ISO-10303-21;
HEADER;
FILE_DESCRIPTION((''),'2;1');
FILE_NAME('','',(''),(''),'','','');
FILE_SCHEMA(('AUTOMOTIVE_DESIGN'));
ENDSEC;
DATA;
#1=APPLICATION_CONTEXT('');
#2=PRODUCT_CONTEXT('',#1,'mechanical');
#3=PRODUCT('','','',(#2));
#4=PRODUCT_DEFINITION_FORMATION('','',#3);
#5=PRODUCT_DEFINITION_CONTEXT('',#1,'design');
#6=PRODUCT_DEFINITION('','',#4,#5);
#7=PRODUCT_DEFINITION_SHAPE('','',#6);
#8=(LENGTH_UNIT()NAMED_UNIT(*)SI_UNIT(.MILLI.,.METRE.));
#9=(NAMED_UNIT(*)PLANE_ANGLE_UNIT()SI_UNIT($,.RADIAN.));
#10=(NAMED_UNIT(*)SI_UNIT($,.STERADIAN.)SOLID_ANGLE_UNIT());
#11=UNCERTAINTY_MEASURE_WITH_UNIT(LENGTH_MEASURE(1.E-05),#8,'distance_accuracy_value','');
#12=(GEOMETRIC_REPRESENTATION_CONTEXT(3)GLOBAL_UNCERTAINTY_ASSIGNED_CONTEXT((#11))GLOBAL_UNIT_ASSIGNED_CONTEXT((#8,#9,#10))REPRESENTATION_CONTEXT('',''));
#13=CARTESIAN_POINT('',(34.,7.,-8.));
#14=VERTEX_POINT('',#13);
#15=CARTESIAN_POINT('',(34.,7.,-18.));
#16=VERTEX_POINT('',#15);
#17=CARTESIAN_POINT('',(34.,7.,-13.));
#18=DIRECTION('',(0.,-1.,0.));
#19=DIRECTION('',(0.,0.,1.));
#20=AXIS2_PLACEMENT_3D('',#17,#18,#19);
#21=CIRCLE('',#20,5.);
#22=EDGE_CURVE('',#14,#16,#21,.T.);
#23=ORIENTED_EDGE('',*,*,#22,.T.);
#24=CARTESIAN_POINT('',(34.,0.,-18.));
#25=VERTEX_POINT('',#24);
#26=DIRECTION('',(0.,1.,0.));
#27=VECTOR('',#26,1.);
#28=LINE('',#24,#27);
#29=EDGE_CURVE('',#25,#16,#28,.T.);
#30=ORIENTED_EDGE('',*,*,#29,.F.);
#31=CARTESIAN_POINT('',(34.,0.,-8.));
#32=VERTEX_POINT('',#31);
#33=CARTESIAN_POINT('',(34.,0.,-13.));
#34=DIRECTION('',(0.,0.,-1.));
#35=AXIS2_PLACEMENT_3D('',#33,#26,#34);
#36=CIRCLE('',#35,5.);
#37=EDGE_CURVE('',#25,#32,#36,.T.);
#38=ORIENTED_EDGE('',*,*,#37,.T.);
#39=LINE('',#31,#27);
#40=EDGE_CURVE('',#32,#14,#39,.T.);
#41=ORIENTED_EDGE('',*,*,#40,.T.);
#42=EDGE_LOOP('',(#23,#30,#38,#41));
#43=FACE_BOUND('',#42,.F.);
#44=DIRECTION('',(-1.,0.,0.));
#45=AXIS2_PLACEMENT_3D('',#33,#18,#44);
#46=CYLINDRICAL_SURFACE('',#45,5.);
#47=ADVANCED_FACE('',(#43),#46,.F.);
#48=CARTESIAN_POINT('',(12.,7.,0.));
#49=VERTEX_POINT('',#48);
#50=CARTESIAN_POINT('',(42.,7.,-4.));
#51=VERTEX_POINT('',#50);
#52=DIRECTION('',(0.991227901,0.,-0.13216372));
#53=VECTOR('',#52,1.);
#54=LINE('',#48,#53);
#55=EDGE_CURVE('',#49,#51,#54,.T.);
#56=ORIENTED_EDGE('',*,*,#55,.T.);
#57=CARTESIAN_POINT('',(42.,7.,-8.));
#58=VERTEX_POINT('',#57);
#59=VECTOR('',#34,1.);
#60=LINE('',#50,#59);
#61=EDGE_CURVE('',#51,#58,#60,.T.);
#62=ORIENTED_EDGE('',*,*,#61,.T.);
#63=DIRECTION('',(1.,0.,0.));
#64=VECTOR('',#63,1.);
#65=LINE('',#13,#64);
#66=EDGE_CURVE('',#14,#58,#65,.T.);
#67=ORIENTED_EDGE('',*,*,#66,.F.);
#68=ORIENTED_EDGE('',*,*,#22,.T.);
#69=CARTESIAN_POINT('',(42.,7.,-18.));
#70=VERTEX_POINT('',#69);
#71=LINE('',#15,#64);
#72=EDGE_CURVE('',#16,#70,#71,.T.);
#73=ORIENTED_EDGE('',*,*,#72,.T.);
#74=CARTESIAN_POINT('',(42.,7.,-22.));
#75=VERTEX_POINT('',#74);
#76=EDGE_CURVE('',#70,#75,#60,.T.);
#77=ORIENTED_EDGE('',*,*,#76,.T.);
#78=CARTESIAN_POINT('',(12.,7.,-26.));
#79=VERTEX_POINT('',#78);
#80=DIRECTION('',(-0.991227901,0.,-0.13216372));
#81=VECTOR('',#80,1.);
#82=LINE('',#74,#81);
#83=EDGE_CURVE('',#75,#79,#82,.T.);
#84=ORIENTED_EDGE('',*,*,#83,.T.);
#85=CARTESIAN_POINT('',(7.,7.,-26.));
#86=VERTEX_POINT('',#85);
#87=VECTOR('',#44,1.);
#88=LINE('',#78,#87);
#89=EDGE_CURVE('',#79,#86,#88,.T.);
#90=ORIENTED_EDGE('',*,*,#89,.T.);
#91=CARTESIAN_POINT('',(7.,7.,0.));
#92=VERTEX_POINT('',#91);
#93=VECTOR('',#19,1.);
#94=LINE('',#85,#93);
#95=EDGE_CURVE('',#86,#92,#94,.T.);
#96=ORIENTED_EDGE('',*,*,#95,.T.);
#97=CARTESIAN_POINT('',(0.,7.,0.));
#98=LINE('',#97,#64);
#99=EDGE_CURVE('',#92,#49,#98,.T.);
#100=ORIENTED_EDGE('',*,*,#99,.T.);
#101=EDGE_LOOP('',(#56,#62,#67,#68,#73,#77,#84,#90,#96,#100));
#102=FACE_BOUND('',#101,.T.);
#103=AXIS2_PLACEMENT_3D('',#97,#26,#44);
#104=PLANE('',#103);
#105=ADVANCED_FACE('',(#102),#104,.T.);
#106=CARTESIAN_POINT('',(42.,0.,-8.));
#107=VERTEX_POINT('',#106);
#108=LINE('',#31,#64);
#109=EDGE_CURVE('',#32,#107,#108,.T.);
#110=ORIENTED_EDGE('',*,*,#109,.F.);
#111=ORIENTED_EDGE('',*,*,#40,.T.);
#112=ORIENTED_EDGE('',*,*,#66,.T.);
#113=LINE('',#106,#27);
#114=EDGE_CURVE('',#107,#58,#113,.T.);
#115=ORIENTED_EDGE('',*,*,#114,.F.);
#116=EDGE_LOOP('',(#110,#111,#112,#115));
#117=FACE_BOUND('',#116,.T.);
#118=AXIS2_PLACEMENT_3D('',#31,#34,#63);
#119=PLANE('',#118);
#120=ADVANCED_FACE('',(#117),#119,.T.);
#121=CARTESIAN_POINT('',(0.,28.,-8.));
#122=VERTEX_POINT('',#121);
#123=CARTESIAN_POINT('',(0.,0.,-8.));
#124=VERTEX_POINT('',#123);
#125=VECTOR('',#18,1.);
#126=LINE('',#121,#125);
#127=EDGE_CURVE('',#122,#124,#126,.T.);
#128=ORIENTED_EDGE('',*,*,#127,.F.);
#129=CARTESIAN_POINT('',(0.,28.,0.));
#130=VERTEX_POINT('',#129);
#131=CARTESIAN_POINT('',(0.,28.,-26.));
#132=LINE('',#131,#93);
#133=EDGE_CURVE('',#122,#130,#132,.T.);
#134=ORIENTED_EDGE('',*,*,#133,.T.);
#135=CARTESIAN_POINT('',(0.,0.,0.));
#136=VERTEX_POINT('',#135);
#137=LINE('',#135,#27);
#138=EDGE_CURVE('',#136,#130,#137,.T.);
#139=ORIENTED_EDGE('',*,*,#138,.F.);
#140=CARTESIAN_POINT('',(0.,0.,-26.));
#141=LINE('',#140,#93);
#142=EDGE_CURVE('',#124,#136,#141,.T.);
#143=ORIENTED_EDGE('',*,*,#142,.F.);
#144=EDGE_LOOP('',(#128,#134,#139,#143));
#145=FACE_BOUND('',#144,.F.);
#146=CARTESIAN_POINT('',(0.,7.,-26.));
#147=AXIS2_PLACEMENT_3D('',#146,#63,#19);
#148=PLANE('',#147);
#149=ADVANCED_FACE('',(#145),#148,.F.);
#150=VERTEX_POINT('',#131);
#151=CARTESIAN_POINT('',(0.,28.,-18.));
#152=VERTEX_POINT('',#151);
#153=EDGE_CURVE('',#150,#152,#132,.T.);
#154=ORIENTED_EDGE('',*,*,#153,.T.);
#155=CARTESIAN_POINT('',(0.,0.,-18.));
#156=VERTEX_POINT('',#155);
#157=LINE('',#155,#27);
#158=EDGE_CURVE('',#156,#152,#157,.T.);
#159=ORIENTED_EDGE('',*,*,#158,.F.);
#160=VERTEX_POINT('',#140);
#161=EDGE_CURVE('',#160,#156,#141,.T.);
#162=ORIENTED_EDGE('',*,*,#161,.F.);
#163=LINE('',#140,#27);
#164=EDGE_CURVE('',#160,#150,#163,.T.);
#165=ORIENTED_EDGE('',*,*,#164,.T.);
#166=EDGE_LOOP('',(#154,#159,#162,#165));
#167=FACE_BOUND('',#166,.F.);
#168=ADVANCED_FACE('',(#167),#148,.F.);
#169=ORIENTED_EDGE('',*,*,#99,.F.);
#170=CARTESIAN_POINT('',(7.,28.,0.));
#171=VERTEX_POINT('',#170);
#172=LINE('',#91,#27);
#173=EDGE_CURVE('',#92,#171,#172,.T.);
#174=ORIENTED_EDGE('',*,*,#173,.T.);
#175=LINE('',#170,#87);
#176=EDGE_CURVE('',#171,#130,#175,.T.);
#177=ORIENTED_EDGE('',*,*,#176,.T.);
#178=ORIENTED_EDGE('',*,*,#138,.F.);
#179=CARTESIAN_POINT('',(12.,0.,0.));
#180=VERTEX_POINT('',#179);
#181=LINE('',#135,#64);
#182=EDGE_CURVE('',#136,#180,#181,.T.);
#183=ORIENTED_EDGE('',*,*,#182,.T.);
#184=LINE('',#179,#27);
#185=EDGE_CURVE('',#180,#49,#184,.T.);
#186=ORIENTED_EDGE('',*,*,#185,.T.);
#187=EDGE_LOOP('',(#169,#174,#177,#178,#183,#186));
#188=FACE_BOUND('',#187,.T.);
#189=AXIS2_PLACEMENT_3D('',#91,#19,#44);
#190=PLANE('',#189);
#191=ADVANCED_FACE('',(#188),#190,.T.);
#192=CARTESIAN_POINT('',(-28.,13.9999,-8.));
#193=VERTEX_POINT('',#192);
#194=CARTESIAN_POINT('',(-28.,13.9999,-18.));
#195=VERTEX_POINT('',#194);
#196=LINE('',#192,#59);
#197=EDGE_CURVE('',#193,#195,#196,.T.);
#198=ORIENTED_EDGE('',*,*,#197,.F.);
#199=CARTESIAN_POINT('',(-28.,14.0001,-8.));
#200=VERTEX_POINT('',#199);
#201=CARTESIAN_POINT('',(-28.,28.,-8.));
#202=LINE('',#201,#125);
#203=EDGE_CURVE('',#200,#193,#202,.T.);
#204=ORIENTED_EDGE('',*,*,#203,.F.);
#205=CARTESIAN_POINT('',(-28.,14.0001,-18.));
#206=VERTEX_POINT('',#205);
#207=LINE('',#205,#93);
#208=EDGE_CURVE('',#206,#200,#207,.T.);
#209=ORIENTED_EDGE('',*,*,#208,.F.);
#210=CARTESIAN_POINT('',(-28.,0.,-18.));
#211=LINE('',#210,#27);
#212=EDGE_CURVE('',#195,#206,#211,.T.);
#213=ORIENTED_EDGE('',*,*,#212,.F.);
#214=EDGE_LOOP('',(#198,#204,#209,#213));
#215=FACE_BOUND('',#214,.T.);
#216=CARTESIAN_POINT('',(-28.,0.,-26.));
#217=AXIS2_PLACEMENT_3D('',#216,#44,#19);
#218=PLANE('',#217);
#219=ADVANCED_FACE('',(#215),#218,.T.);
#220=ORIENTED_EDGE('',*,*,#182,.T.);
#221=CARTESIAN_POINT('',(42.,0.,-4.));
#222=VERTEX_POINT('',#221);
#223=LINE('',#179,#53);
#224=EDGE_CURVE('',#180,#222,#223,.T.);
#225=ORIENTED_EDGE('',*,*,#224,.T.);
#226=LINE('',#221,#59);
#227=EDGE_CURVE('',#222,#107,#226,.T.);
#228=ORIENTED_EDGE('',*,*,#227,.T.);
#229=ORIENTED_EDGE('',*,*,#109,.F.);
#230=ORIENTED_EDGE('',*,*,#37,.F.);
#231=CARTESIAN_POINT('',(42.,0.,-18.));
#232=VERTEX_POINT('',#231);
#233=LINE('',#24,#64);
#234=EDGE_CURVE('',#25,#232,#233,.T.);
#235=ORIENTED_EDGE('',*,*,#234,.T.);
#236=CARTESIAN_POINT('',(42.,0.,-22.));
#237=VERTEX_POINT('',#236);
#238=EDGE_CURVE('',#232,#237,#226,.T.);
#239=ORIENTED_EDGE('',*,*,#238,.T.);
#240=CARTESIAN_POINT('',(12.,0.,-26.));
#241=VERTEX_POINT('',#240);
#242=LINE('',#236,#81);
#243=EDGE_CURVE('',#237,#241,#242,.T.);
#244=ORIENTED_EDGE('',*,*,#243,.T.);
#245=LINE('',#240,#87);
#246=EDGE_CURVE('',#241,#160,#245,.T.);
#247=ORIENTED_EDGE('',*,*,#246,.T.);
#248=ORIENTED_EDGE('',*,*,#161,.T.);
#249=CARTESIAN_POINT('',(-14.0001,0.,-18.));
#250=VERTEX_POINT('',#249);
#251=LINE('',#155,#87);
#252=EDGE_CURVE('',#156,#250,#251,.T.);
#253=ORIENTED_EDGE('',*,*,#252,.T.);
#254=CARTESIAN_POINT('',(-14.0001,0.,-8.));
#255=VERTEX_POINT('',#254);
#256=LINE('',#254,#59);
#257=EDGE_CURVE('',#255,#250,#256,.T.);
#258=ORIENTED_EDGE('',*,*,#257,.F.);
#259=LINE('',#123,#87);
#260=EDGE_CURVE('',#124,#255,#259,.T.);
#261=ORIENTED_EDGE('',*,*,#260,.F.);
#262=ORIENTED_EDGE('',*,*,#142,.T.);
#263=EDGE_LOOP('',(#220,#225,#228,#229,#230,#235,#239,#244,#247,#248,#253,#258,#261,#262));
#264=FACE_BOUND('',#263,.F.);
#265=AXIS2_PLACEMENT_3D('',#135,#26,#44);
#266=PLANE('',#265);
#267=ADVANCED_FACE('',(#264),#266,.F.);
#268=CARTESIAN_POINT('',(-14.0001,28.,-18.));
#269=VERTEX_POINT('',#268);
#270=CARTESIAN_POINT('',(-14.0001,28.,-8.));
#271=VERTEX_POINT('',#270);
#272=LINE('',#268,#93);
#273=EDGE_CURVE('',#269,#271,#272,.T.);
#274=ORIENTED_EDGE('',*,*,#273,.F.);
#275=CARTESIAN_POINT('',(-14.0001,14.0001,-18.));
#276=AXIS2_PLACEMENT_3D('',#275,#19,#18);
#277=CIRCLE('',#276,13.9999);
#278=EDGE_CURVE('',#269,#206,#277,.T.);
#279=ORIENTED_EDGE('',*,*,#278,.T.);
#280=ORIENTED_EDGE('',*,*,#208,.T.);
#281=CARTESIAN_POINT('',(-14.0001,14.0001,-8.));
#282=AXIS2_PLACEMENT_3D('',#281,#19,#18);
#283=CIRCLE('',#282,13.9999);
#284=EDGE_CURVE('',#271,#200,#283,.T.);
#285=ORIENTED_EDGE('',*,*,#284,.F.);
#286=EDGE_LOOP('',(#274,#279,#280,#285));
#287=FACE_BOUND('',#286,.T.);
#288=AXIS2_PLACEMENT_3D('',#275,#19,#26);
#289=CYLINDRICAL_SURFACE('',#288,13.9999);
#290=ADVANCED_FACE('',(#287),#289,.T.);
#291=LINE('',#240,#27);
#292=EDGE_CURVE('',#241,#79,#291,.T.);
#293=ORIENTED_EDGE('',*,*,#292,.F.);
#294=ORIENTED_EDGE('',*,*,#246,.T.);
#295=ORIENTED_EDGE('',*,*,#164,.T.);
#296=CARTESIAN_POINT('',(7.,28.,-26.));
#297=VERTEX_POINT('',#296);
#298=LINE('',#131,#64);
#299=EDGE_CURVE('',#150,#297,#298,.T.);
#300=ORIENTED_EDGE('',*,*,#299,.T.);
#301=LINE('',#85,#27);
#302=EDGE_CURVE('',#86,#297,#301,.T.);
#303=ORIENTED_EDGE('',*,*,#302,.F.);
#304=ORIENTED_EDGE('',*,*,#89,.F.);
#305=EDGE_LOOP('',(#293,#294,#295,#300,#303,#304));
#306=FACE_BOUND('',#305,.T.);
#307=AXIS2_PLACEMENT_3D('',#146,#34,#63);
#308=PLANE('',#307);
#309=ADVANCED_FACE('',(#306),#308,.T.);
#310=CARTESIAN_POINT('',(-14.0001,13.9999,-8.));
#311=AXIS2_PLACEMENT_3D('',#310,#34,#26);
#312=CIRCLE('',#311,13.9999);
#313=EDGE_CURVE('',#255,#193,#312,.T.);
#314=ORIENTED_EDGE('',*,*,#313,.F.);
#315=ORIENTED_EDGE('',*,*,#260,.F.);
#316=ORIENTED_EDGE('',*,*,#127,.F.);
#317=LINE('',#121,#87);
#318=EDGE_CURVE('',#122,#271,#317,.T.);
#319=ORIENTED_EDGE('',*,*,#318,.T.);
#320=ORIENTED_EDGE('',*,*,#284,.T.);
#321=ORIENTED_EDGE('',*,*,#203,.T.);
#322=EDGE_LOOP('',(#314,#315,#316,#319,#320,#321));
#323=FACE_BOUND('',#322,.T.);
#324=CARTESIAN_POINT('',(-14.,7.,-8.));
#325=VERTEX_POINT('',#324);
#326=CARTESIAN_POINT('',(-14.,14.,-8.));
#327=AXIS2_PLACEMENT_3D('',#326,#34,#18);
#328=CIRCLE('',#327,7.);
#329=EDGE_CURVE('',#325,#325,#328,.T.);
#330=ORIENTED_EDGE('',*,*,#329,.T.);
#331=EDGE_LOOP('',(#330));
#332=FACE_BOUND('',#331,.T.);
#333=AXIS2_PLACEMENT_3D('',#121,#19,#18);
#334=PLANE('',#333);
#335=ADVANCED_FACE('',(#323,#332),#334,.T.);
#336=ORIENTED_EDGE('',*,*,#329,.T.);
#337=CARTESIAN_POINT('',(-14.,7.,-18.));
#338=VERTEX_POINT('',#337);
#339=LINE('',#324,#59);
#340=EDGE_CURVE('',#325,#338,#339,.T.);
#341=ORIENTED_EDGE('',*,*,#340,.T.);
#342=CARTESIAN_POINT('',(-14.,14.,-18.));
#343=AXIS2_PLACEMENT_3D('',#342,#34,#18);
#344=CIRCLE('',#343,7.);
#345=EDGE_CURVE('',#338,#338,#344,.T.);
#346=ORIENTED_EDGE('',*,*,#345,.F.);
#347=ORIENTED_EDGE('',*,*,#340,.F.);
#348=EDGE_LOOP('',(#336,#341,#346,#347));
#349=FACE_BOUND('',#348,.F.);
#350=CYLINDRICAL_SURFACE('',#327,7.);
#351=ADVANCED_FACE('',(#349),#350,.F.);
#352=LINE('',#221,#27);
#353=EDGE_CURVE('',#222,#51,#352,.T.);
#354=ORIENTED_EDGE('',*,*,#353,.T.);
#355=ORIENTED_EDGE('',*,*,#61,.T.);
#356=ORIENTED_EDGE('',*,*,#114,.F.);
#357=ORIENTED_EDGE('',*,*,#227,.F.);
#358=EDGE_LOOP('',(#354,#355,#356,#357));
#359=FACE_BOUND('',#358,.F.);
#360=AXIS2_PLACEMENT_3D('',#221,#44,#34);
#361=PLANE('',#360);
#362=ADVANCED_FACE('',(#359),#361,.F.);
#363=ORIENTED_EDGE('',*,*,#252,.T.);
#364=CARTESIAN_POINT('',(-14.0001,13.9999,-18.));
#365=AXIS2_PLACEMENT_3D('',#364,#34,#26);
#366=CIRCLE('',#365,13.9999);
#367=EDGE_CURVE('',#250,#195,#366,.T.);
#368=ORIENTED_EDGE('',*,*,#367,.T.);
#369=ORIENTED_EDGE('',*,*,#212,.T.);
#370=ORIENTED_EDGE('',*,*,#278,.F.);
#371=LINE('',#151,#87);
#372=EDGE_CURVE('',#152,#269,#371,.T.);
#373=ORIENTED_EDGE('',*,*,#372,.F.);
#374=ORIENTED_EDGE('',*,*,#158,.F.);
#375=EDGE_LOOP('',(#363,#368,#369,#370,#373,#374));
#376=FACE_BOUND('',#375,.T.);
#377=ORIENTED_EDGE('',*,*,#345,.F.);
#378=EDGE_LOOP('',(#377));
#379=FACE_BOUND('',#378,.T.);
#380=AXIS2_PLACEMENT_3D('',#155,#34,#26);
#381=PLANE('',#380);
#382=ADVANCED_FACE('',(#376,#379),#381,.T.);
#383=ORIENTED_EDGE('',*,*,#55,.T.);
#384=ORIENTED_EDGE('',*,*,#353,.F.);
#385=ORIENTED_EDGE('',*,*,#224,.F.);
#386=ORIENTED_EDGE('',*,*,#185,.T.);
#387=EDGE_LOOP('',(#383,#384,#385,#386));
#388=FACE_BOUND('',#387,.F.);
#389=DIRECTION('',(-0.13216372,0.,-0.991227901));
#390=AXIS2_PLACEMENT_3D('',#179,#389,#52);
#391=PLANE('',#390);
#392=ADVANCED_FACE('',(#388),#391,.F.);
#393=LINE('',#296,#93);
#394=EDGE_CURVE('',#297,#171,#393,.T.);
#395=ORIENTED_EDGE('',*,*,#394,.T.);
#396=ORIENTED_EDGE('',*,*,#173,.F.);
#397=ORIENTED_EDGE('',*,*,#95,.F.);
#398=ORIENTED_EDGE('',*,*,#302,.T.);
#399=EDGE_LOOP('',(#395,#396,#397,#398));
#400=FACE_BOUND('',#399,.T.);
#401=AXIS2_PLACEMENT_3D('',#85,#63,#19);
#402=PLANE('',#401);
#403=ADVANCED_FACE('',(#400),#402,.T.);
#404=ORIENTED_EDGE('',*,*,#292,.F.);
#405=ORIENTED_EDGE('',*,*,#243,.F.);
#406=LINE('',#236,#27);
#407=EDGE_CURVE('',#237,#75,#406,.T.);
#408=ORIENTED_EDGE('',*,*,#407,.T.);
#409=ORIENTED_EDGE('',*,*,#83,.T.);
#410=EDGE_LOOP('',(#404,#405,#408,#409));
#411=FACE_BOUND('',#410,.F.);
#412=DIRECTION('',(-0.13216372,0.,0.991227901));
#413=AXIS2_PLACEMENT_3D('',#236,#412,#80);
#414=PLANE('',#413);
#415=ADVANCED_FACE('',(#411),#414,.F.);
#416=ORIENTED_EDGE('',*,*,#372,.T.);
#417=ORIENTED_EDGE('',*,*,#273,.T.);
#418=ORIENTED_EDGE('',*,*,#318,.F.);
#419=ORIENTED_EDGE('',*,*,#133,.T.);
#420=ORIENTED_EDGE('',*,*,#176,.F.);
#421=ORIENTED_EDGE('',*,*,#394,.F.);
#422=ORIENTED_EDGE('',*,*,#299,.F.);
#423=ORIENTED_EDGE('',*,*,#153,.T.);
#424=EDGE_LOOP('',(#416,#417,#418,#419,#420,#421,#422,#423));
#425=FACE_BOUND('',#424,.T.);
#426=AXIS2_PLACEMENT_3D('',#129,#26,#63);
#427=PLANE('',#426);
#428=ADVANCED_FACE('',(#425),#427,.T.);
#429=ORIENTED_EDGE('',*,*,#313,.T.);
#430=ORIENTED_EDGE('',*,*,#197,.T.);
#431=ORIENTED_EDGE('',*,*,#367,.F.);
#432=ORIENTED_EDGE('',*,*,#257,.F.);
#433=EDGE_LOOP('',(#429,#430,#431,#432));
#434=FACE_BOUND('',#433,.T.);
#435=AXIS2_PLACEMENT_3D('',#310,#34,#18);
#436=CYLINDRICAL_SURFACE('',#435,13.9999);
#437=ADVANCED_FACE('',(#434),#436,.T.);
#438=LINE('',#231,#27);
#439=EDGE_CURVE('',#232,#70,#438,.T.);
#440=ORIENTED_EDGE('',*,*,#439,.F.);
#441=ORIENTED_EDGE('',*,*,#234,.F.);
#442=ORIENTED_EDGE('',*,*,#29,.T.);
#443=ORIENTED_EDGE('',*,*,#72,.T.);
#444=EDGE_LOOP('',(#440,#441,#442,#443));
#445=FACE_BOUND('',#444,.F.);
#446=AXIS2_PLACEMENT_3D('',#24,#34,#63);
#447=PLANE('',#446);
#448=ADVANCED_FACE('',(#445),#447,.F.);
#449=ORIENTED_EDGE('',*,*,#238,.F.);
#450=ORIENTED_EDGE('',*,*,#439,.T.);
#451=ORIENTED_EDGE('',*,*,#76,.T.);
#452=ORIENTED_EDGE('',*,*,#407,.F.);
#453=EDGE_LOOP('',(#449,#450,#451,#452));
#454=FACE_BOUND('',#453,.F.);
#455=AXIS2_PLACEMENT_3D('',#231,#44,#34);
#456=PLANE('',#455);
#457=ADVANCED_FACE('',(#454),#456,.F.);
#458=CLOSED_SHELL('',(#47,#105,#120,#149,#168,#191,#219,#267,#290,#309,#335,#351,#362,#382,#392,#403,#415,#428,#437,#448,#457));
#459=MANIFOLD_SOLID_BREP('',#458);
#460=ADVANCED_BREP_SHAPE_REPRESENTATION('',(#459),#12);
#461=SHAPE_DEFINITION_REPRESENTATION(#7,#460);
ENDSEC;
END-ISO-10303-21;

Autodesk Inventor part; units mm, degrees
ref_plane "YZ Plane" through (0, 0, 0) normal (1, 0, 0) x (0, 1, 0)
ref_plane "XZ Plane" through (0, 0, 0) normal (0, 1, 0) x (-1, 0, 0)
ref_plane "XY Plane" through (0, 0, 0) normal (0, 0, 1) x (1, 0, 0)
sketch "Szkic1" plane through (0, 0, 0) normal (0, 1, 0) x (-1, 0, 0)
  line L0 (0, 0) -> (-12, 0)
  line L1 (-12, 0) -> (-12, -26)
  line L2 (-12, -26) -> (0, -26)
  line L3 (0, -26) -> (0, 0)
  line L4 (-12, 0) -> (-42, -4)
  line L5 (-42, -4) -> (-42, -22)
  line L6 (-42, -22) -> (-12, -26)
  circle A0 centre (-34, -13) radius 5
  line L7 (-34, -18) -> (-42, -18)
  line L8 (-34, -8) -> (-42, -8)
  dimension "d0" = 12
  dimension "d1" = 26
  dimension "d2" = 18
  dimension "d3" = 30
  dimension "d4" = 10
extrude "Wyciągnięcie proste1" add sketch "Szkic1" along normal blind 7 contours L3 L2 L1 L0 | L1 L6 L5 L7 A0 L8 L4
sketch "Szkic2" plane through (0, 7, 0) normal (0, 1, 0) x (1, 0, 0)
  line L0 (0, 26) -> (0, 0) projected
  line L1 (0, 26) -> (7, 26)
  line L2 (7, 26) -> (7, 0)
  line L3 (7, 0) -> (0, 0)
  line L4 (0, 0) -> (0, 26)
extrude "Wyciągnięcie proste2" add sketch "Szkic2" along normal blind 21
sketch "Szkic3" plane through (0, 0, -26) normal (-1, 0, 0) x (0, 0, 1)
  line L0 (8, 28) -> (18, 28)
  line L1 (18, 28) -> (18, 0)
  line L2 (18, 0) -> (8, 0)
  line L3 (8, 0) -> (8, 28)
  line L4 (0, 0) -> (0, 28) projected
  point P0 (26, 0)
  dimension "d9" = 10
  dimension "d10" = 8
extrude "Wyciągnięcie proste3" add sketch "Szkic3" along normal blind 28
sketch "Szkic4" plane through (0, 0, -8) normal (0, 0, 1) x (1, 0, 0)
  point P0 (0, 0)
  point P1 (-14, 14)
hole "Otwór1" at (-14, 14, -8) direction (0, 0, -1) diameter 14 end through all
full round fillet "Zaokrąglenie pełne1" first side at (-18.6667, 28, -14.6667) centre faces at (-28, 18.6667, -14.6667) second side at (17.6788, 0, -13.2009)
